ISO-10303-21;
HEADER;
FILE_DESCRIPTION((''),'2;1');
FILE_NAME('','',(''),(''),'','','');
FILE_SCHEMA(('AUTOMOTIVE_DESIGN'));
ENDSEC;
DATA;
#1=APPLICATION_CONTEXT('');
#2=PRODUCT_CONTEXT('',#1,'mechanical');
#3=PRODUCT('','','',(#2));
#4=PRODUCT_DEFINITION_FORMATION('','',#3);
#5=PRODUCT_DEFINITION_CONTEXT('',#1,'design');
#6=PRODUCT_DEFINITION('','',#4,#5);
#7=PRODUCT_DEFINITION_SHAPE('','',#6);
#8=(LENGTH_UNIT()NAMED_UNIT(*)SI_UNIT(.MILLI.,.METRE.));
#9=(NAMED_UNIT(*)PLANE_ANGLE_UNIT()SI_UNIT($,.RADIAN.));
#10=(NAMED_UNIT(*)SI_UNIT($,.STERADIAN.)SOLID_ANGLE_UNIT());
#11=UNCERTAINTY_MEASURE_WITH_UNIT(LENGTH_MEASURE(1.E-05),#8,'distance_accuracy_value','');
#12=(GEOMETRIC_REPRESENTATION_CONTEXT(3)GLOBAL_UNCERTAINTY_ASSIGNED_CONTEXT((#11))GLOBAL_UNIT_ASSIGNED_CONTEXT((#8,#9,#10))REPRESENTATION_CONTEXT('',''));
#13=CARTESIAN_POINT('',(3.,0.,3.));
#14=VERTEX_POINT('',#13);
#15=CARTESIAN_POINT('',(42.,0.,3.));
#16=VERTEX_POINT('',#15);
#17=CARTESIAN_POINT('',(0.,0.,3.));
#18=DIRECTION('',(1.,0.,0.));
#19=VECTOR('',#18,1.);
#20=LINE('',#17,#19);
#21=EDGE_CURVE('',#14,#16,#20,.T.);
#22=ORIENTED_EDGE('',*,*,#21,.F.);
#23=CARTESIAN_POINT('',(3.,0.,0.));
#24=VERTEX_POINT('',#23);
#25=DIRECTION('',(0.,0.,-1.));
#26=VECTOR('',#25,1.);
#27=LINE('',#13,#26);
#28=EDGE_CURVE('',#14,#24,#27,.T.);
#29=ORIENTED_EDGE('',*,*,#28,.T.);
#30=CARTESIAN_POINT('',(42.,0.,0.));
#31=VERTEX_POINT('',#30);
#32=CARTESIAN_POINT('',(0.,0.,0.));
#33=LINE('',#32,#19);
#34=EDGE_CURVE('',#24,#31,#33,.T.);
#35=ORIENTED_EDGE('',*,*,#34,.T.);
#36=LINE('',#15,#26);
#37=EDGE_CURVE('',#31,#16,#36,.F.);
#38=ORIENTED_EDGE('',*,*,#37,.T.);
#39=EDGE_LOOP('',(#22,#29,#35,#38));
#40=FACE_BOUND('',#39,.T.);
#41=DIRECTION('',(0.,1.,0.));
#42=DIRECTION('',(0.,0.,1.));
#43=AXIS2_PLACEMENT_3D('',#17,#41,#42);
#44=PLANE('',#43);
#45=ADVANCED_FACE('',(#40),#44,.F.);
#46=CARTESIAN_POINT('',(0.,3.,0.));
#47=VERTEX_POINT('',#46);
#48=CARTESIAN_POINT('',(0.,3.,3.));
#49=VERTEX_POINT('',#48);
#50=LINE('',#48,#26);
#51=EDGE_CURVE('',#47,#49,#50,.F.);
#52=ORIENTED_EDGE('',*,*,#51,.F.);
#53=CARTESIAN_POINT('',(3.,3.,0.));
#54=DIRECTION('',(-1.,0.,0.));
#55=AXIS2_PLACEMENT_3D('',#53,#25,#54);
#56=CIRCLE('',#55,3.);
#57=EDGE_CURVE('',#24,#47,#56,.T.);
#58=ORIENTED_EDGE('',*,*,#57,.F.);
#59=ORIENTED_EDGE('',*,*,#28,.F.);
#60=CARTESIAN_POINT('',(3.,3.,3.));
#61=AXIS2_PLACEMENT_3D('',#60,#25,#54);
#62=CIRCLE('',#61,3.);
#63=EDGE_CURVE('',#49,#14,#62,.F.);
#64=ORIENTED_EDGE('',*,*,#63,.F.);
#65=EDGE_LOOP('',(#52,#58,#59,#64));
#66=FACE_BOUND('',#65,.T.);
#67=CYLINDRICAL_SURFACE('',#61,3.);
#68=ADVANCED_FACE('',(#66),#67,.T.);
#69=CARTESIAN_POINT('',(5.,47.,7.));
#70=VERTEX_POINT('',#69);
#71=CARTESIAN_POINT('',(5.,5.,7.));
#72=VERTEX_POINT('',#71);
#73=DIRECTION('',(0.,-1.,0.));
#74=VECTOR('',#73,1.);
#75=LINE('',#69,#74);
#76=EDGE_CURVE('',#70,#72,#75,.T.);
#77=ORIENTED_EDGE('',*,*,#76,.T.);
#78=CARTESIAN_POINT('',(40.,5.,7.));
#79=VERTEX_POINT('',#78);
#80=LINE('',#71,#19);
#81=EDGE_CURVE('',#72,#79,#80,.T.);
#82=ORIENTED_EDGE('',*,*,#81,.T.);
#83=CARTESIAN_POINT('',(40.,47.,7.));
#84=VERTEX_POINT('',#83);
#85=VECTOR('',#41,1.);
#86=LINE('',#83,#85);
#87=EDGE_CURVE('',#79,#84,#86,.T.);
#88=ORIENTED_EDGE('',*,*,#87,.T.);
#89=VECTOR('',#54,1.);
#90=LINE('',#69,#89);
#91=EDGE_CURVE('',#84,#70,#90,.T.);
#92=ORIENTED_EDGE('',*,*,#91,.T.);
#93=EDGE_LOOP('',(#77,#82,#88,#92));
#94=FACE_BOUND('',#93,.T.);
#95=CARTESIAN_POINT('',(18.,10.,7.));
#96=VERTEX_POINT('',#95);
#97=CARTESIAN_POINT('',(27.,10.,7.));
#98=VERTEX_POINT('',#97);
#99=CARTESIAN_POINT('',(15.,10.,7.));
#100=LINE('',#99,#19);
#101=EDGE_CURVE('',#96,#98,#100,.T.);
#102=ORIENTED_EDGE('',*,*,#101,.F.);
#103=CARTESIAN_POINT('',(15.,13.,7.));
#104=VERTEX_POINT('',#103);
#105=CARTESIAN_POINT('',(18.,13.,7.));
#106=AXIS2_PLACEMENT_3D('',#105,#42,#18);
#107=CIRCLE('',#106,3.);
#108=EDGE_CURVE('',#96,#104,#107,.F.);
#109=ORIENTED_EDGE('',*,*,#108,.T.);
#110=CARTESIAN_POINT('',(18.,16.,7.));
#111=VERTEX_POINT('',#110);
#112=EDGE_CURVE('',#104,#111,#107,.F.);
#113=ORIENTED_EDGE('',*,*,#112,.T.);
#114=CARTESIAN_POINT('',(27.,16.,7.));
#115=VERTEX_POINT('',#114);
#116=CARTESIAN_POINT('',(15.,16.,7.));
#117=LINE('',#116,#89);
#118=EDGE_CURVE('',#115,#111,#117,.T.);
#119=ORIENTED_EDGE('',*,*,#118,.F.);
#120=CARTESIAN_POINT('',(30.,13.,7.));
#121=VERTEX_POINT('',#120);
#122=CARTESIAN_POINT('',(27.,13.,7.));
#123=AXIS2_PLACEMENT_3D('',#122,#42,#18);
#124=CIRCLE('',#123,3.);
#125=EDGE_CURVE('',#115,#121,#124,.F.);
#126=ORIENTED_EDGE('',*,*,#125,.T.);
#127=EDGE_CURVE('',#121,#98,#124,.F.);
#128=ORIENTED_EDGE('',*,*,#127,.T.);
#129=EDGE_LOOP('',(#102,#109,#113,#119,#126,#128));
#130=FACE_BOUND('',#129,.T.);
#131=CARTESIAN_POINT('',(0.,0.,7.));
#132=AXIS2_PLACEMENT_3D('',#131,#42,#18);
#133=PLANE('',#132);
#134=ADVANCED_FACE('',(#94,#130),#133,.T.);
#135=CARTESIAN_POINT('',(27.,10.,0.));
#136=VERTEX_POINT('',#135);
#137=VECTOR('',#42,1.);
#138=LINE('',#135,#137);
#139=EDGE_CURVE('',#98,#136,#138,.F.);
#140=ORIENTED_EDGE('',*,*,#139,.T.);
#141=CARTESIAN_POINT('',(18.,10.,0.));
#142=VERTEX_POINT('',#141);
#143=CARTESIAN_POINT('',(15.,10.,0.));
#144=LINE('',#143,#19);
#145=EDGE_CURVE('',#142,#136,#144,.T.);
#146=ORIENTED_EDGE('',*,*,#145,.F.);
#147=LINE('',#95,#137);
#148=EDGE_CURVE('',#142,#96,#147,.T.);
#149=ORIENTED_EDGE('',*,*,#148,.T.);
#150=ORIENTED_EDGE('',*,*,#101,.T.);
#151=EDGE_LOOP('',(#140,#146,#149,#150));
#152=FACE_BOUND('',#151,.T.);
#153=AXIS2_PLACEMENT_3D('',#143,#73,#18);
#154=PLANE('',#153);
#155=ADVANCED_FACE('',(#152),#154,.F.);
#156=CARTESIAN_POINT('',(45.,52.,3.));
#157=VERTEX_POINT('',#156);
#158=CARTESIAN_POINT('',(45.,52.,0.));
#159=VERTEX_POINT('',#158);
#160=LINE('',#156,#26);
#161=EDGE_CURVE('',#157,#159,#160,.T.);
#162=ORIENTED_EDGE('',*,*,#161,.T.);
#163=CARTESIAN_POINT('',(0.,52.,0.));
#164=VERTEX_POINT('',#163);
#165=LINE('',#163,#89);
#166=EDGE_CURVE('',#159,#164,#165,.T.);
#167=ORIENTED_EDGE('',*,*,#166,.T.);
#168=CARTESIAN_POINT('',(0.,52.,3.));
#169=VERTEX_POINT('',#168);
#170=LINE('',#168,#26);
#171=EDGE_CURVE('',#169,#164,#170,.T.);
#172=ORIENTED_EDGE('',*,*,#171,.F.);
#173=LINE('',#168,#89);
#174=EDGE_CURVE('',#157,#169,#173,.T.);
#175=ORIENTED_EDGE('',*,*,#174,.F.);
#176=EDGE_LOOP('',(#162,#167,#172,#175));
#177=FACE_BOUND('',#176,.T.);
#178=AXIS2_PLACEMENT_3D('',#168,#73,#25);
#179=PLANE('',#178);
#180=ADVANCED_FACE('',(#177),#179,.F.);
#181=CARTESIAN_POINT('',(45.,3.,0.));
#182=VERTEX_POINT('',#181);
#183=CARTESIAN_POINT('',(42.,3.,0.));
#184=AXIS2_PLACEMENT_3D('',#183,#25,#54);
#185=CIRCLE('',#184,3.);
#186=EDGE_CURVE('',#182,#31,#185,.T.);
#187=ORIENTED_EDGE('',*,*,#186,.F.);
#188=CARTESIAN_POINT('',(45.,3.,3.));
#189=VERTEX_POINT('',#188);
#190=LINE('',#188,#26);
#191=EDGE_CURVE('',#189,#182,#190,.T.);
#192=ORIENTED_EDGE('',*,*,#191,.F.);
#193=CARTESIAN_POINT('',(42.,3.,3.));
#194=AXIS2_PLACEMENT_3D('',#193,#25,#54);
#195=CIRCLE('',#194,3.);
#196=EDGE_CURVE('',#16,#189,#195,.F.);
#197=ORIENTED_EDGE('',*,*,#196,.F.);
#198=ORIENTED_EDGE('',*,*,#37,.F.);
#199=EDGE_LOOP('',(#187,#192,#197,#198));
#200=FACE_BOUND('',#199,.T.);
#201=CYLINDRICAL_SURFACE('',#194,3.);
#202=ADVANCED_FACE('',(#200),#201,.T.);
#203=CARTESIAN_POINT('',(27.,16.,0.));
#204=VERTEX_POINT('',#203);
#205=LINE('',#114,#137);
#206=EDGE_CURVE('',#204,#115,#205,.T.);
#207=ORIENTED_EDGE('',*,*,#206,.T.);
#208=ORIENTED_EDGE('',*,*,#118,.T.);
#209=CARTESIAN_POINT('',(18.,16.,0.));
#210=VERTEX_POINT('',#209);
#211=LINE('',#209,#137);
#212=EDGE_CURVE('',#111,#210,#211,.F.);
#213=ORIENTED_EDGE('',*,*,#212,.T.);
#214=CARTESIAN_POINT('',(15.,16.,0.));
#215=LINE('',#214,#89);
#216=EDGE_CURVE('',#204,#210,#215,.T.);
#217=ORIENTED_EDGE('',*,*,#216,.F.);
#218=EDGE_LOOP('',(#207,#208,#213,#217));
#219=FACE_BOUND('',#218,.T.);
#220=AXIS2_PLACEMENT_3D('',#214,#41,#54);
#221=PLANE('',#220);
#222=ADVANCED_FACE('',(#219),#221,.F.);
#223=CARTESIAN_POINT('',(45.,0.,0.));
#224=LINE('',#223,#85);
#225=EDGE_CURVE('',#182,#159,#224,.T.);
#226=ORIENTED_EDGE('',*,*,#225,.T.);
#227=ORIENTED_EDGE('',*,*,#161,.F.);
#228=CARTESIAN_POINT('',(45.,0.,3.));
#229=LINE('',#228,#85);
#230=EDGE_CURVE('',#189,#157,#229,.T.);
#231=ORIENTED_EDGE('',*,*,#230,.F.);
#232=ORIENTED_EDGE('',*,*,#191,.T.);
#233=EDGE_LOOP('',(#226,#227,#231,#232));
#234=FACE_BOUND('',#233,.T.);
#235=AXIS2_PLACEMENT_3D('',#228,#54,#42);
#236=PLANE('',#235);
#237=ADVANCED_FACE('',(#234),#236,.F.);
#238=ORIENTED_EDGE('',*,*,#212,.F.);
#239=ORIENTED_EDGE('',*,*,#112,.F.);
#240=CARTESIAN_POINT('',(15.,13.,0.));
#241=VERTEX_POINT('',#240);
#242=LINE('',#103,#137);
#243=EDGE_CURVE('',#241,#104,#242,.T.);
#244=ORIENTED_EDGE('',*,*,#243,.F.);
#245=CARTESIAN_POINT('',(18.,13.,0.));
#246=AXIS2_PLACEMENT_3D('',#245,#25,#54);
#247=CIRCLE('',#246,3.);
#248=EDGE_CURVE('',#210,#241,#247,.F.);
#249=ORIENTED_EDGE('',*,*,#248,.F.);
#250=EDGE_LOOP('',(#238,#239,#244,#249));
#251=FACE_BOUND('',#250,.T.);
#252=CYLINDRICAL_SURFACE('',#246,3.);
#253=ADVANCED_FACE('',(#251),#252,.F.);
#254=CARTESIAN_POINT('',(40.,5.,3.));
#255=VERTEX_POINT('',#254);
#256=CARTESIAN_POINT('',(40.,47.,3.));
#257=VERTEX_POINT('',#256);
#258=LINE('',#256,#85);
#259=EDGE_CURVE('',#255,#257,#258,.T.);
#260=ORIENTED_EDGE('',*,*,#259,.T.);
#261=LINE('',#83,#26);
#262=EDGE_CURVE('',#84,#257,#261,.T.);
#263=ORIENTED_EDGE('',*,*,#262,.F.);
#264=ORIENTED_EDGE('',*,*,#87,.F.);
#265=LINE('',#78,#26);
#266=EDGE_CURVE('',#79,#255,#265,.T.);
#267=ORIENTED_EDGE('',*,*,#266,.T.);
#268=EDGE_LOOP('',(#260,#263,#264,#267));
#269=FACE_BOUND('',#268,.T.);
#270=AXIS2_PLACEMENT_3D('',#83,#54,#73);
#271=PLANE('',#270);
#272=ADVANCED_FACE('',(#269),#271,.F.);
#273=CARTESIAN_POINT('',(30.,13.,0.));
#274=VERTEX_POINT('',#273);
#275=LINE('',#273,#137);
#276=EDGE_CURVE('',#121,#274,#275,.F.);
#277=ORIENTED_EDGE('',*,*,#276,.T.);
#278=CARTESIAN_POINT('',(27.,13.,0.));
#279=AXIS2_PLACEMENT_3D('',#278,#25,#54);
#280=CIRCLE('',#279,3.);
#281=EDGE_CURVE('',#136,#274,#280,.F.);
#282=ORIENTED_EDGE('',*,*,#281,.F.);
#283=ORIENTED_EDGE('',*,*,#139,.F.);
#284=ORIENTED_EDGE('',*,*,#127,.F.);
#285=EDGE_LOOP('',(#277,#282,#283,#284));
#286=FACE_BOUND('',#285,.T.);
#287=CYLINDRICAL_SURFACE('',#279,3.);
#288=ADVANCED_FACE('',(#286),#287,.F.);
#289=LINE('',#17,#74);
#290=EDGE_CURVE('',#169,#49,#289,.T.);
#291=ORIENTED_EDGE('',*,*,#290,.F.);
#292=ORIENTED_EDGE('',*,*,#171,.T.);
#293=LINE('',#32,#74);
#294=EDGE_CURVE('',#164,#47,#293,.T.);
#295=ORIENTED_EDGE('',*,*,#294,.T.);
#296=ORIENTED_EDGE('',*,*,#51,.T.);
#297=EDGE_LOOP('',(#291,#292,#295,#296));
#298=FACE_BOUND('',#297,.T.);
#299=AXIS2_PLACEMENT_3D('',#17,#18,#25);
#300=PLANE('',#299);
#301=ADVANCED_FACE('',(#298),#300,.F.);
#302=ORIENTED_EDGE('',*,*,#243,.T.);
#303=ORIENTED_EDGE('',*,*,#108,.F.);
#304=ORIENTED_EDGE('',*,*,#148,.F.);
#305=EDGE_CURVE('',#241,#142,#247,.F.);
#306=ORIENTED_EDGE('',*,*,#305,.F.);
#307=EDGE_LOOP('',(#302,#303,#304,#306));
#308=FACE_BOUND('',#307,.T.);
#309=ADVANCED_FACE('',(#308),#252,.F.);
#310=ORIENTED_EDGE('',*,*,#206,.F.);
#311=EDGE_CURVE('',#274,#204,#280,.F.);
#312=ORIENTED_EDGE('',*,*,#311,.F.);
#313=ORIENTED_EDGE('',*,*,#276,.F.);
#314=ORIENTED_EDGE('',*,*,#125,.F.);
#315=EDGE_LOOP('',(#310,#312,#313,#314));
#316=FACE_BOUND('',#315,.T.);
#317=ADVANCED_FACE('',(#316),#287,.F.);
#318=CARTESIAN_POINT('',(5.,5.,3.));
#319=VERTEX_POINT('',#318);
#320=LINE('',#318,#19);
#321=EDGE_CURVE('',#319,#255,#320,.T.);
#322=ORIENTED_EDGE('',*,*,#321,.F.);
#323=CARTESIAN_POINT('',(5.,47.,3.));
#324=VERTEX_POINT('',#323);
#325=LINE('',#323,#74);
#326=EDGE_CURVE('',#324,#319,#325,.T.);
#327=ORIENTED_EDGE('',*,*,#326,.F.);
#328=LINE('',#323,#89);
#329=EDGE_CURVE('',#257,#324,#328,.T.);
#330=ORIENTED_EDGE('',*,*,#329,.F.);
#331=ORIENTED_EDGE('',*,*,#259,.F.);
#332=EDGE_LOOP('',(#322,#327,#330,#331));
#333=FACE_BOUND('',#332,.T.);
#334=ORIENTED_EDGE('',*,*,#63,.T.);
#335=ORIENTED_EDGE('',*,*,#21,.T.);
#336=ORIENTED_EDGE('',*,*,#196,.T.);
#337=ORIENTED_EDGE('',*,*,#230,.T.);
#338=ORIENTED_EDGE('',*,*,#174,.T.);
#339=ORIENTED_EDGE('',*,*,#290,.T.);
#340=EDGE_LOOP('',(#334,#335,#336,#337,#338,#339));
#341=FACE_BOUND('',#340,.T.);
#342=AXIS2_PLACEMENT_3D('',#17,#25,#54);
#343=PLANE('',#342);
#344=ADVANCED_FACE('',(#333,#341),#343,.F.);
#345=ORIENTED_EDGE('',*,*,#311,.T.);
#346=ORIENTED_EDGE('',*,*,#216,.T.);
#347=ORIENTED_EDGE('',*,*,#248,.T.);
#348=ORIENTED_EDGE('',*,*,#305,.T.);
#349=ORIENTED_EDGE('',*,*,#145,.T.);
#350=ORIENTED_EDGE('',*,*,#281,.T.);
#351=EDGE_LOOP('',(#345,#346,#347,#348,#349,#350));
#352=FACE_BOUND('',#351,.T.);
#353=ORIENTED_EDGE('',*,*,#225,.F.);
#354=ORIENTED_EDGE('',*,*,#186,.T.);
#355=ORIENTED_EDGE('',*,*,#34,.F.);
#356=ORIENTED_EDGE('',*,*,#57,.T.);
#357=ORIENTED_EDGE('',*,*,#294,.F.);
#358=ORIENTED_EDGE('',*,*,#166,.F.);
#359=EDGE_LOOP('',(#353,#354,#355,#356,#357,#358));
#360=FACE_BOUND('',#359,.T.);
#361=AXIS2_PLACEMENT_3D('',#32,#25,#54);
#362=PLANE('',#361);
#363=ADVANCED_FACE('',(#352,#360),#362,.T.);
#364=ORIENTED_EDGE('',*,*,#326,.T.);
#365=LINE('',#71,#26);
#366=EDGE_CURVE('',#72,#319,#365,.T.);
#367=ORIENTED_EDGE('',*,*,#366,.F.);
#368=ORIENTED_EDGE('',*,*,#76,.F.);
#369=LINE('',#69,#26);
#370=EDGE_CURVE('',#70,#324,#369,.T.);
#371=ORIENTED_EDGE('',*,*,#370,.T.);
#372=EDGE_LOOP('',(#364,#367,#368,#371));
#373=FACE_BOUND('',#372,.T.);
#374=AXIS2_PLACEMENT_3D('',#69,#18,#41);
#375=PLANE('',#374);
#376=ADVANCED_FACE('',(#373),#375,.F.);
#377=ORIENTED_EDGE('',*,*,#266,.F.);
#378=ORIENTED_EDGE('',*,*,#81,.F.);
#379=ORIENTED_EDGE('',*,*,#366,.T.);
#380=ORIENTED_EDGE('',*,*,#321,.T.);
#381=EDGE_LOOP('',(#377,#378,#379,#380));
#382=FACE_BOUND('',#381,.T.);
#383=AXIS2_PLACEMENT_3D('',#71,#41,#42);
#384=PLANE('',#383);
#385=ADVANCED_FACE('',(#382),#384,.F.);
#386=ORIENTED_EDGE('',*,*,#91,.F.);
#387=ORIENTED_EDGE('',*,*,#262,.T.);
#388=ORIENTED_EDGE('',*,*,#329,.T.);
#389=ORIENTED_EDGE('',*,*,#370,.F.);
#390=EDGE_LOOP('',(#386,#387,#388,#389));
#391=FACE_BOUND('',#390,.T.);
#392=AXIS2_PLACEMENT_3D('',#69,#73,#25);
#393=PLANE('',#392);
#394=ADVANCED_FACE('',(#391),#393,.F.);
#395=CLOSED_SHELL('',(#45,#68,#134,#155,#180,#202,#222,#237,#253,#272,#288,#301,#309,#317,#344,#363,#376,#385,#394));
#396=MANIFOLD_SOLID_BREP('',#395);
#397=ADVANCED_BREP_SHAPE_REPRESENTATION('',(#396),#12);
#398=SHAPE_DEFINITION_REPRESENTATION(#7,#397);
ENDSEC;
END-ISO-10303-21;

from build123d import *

# Parameters (mm, degrees)
SKETCH1_W           = 45
SKETCH1_H           = 52
BOSS_EXTRUDE1_DEPTH = 3
SKETCH2_W           = 35
SKETCH2_H           = 42
BOSS_EXTRUDE2_DEPTH = 4
SKETCH3_W           = 15
SKETCH3_H           = 6
CUT_EXTRUDE1_DEPTH  = 70.123078635
FILLET1_R           = 3


with BuildPart() as part:
    # Sketch1 → Boss-Extrude1 (new body)
    with BuildSketch(Plane.XY):
        with Locations((22.5, 26)):
            Rectangle(SKETCH1_W, SKETCH1_H)
    extrude(amount=BOSS_EXTRUDE1_DEPTH)

    # Sketch2 → Boss-Extrude2 (add)
    with BuildSketch(Plane.XY.offset(3)):
        with Locations((22.5, 26)):
            Rectangle(SKETCH2_W, SKETCH2_H)
    extrude(amount=BOSS_EXTRUDE2_DEPTH)

    # Sketch3 → Cut-Extrude1 (cut, through all)
    with BuildSketch(Plane.XY.offset(7)):
        with Locations((22.5, 13)):
            Rectangle(SKETCH3_W, SKETCH3_H)
    extrude(amount=-CUT_EXTRUDE1_DEPTH, mode=Mode.SUBTRACT)

    # Fillet1
    fillet1_edges = [part.edges().sort_by_distance(p)[0] for p in [
        (30, 10, 3.5),
        (15, 10, 3.5),
        (30, 16, 3.5),
        (15, 16, 3.5),
        (45, 0, 1.5),
        (0, 0, 1.5),
    ]]
    fillet(fillet1_edges, radius=FILLET1_R - 0.0001)  # a hair under: the kernel refuses the full size


solid = part.part
